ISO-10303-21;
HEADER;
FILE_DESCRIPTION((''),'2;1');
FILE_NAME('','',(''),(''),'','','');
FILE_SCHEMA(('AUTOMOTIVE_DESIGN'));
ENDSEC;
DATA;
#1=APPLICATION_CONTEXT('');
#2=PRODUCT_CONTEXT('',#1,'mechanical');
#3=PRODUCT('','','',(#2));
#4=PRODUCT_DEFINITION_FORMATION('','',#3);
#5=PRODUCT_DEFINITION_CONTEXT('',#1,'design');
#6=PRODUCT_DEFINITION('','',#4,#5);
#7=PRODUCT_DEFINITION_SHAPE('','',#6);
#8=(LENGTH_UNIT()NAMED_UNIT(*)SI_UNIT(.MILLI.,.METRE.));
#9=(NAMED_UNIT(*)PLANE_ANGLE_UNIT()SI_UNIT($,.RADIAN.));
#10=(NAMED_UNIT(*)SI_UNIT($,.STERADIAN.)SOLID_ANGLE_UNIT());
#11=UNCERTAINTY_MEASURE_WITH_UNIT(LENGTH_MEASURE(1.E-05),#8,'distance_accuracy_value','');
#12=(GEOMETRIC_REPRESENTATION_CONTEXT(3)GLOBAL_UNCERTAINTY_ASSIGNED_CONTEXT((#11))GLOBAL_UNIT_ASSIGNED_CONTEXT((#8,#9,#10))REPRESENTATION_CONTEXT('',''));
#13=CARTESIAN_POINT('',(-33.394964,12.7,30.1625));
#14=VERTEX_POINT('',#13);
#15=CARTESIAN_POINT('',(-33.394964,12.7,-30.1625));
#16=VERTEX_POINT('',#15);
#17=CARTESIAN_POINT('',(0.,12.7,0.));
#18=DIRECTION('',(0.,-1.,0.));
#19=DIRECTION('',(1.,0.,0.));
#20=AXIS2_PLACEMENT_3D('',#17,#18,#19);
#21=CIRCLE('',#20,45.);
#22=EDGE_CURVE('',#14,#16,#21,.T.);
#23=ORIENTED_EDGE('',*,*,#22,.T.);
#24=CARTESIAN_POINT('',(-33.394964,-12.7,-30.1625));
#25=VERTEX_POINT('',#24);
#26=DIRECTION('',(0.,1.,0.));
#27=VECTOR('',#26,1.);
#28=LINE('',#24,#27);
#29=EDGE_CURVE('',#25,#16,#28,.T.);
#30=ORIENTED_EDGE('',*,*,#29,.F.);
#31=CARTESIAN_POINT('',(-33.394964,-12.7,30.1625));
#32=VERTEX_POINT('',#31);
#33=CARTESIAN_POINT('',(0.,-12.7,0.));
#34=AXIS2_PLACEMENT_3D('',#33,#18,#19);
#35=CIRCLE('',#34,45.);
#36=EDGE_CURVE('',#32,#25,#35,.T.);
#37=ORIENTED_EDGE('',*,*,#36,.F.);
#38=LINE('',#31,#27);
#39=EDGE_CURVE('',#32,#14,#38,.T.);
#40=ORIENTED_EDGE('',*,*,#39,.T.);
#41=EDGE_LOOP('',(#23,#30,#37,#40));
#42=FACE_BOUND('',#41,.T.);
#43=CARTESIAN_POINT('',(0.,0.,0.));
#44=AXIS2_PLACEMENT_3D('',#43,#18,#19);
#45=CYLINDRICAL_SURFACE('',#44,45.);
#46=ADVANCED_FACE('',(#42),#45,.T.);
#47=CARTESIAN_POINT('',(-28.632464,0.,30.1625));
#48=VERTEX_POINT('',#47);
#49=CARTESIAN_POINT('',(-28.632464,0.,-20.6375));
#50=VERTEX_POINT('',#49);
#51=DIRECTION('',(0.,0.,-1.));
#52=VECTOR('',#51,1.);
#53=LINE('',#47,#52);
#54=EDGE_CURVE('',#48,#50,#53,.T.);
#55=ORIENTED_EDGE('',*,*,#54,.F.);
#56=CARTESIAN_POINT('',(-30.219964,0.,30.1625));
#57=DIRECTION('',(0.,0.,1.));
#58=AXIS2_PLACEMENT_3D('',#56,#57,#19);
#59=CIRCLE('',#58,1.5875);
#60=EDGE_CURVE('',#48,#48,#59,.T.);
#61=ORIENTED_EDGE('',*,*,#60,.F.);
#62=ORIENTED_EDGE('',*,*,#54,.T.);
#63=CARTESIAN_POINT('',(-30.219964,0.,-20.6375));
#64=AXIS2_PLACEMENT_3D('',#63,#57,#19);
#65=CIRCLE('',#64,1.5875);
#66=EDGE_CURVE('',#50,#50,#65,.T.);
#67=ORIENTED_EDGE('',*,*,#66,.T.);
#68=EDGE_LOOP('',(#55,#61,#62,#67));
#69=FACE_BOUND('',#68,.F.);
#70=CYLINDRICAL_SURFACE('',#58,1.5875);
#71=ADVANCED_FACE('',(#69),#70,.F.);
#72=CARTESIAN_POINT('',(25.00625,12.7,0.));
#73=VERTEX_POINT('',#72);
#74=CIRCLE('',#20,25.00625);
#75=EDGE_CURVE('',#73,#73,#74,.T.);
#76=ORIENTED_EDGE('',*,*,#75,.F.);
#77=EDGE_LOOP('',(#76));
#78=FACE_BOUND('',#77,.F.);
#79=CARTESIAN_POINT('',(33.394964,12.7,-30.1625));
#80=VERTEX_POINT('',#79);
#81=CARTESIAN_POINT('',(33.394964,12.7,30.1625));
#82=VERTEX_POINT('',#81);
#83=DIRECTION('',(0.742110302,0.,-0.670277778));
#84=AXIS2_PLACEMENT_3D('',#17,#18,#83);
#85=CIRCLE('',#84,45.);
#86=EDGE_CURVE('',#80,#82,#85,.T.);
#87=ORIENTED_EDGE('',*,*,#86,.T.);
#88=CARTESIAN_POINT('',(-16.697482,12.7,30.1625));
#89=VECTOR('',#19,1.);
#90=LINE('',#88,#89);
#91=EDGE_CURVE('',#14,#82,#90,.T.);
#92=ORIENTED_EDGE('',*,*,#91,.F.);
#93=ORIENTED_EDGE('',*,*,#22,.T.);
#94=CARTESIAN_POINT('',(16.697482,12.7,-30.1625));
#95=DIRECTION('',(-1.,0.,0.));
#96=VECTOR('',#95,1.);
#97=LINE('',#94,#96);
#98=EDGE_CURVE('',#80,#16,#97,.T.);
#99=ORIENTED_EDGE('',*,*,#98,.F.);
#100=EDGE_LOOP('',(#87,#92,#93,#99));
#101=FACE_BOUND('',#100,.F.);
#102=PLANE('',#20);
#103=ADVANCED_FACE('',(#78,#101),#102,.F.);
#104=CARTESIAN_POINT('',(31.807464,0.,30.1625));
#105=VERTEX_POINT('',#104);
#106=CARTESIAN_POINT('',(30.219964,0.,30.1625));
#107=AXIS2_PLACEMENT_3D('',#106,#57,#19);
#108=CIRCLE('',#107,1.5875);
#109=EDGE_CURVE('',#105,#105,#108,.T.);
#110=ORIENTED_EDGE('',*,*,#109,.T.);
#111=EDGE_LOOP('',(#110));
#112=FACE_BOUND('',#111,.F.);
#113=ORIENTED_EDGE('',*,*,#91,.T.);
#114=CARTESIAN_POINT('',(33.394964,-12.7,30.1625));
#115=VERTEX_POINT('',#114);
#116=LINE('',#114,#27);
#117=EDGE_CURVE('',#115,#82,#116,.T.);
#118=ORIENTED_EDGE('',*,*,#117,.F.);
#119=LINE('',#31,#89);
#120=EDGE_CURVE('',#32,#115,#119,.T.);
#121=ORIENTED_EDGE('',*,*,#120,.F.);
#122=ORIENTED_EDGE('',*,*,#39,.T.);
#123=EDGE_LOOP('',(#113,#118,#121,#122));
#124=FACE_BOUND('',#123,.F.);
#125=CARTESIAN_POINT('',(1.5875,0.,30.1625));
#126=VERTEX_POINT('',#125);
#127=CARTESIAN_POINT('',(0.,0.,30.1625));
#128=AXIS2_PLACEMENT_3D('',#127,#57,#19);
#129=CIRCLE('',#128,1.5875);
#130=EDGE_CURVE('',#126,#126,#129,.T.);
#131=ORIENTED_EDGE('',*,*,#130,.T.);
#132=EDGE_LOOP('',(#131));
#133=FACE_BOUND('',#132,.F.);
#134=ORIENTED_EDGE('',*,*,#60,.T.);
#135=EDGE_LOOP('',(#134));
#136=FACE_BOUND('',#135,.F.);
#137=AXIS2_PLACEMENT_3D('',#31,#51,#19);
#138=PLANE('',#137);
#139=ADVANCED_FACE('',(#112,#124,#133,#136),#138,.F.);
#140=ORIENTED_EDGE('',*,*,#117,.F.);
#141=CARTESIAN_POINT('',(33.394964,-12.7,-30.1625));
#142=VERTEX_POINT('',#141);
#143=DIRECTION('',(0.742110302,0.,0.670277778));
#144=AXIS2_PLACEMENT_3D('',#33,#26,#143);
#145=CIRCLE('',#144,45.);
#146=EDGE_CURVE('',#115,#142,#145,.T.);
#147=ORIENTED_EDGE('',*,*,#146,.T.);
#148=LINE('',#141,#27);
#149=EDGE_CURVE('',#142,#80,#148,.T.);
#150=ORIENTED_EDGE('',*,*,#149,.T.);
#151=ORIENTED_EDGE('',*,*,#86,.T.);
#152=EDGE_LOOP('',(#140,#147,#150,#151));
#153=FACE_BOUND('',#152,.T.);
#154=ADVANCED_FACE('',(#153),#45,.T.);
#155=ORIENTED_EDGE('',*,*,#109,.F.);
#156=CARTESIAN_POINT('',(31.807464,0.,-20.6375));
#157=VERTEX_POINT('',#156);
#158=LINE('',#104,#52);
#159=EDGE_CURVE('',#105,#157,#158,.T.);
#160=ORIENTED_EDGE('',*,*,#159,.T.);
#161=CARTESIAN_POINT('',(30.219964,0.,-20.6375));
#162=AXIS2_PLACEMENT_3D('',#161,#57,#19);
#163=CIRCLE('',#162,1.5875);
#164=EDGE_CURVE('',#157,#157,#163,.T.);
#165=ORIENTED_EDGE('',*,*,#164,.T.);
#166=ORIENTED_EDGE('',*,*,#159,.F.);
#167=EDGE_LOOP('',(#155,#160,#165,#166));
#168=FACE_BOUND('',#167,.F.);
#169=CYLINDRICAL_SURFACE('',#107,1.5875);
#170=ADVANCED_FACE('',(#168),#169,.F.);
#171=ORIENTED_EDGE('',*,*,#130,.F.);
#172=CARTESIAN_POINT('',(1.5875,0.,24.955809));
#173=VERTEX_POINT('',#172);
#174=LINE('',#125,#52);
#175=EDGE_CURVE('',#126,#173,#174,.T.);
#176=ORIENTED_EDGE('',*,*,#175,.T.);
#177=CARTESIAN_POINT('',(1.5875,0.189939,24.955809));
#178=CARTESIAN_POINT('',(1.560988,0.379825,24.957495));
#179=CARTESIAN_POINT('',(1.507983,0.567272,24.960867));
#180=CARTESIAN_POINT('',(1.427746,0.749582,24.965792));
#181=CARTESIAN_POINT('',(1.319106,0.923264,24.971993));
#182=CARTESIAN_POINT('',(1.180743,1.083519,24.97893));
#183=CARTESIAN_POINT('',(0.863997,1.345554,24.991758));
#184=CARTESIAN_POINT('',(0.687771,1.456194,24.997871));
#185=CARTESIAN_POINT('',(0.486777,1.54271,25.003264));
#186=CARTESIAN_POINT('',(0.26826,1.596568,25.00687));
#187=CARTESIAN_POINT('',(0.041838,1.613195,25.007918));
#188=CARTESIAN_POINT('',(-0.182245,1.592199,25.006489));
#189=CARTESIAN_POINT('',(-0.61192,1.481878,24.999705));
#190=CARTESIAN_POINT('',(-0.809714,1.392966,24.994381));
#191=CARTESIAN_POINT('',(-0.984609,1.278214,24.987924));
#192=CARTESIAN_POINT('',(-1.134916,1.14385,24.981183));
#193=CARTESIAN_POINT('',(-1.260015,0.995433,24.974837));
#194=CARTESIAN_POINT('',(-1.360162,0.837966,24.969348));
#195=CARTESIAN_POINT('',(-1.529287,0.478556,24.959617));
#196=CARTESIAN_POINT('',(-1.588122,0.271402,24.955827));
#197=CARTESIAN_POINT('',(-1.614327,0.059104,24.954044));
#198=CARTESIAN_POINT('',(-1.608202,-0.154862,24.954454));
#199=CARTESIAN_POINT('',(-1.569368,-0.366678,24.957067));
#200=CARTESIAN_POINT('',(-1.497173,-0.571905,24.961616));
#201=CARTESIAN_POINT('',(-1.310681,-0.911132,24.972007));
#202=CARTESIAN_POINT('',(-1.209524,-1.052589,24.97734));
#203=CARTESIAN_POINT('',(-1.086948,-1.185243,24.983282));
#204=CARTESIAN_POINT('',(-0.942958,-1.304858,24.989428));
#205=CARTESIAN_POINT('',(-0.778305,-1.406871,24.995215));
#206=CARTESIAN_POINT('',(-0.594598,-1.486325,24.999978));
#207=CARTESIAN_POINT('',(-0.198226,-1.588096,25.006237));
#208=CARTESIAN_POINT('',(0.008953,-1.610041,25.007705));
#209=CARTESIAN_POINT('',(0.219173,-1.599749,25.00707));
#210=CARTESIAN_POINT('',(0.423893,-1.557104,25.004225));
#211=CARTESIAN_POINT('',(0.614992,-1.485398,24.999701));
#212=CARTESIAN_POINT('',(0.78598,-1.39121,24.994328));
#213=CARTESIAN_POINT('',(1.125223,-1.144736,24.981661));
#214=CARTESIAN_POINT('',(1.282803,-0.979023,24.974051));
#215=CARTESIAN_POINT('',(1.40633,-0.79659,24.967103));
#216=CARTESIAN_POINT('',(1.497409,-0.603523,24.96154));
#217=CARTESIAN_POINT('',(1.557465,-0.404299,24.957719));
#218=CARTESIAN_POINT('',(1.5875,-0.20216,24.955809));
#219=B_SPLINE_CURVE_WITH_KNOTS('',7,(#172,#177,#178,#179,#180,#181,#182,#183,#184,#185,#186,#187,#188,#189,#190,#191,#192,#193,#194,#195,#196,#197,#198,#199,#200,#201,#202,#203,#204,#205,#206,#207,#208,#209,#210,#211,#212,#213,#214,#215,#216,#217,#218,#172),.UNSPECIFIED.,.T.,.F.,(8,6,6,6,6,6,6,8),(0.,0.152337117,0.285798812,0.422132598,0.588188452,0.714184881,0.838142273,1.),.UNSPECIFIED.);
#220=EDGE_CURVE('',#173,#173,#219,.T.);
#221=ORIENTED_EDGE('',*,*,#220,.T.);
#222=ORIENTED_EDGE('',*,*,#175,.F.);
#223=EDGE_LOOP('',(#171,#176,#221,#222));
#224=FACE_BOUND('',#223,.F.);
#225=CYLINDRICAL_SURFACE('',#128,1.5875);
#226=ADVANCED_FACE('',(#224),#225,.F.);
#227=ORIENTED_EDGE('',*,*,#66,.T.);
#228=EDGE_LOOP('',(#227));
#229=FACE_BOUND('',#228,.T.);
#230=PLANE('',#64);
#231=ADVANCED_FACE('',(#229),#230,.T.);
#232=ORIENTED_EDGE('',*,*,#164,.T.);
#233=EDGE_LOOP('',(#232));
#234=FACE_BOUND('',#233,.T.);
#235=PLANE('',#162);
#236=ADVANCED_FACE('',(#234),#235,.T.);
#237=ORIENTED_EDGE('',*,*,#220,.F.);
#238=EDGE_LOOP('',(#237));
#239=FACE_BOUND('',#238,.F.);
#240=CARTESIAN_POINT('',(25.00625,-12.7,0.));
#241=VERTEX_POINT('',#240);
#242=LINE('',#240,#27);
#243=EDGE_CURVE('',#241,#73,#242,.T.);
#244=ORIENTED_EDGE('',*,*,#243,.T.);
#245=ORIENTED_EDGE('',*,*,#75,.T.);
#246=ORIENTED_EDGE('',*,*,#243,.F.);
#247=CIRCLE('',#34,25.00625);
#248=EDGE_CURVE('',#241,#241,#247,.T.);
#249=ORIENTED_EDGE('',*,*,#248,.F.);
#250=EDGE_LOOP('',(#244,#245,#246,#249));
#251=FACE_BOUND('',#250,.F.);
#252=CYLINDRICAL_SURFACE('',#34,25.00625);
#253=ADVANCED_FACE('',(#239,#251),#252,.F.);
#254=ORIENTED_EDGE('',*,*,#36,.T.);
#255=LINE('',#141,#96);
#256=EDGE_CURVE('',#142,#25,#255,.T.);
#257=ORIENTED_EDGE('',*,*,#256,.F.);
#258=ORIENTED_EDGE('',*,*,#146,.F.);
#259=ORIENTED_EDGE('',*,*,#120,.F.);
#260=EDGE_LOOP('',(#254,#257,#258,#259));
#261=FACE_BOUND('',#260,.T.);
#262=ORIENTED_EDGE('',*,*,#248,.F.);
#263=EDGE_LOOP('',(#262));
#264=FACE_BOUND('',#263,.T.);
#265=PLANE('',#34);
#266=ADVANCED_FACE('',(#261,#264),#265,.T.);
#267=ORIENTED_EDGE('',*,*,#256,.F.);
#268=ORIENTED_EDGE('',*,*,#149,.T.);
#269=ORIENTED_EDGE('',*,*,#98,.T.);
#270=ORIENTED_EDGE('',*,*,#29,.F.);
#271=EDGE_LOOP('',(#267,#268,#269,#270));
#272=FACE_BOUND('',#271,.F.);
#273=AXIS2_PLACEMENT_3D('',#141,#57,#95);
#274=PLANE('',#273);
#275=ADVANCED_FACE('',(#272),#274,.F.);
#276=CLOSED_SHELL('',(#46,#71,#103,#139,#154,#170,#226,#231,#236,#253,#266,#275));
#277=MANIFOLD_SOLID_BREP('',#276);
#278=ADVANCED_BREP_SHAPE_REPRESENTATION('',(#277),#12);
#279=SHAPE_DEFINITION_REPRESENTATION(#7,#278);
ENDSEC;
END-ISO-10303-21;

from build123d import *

# Parameters (mm, degrees)
F0_R     = 45
F1_DEPTH = 12.7
F3_DEPTH = 25.401
F4_R     = 25.00625
F5_DEPTH = 25.401
F6_R     = 1.5875
F7_DEPTH = 50.8


# Not quite as in the source:
# - a feature names something its author has since deleted; it is built from what else it names


with BuildPart() as f1:
    # F0 (on Front) → F1 (new body, symmetric)
    with BuildSketch(Plane.XZ):
        Circle(F0_R)
    extrude(amount=F1_DEPTH, both=True)

    # F2 (on face) → F3 (cut, through all)
    with BuildSketch(Plane.XZ.offset(12.7)):
        with BuildLine():
            Line((-33.3949635986, 30.1625), (33.3949635986, 30.1625))
            ThreePointArc((33.3949635986, 30.1625), (0, 45), (-33.3949635986, 30.1625))
        make_face()
        with BuildLine():
            ThreePointArc((-33.3949635986, -30.1625), (0, -45), (33.3949635986, -30.1625))
            Line((33.3949635986, -30.1625), (-33.3949635986, -30.1625))
        make_face()
    extrude(amount=-F3_DEPTH, mode=Mode.SUBTRACT)

    # F4 (on face) → F5 (cut, through all)
    with BuildSketch(Plane.XZ.offset(12.7)):
        Circle(F4_R)
    extrude(amount=-F5_DEPTH, mode=Mode.SUBTRACT)

    # F6 (on face) → F7 (cut)
    with BuildSketch(Plane.XY.offset(30.1625)):
        with Locations((30.2199635986, 0)):
            Circle(F6_R)
        Circle(F6_R)
        with Locations((-30.2199635986, 0)):
            Circle(F6_R)
    extrude(amount=-F7_DEPTH, mode=Mode.SUBTRACT)


solid = f1.part
